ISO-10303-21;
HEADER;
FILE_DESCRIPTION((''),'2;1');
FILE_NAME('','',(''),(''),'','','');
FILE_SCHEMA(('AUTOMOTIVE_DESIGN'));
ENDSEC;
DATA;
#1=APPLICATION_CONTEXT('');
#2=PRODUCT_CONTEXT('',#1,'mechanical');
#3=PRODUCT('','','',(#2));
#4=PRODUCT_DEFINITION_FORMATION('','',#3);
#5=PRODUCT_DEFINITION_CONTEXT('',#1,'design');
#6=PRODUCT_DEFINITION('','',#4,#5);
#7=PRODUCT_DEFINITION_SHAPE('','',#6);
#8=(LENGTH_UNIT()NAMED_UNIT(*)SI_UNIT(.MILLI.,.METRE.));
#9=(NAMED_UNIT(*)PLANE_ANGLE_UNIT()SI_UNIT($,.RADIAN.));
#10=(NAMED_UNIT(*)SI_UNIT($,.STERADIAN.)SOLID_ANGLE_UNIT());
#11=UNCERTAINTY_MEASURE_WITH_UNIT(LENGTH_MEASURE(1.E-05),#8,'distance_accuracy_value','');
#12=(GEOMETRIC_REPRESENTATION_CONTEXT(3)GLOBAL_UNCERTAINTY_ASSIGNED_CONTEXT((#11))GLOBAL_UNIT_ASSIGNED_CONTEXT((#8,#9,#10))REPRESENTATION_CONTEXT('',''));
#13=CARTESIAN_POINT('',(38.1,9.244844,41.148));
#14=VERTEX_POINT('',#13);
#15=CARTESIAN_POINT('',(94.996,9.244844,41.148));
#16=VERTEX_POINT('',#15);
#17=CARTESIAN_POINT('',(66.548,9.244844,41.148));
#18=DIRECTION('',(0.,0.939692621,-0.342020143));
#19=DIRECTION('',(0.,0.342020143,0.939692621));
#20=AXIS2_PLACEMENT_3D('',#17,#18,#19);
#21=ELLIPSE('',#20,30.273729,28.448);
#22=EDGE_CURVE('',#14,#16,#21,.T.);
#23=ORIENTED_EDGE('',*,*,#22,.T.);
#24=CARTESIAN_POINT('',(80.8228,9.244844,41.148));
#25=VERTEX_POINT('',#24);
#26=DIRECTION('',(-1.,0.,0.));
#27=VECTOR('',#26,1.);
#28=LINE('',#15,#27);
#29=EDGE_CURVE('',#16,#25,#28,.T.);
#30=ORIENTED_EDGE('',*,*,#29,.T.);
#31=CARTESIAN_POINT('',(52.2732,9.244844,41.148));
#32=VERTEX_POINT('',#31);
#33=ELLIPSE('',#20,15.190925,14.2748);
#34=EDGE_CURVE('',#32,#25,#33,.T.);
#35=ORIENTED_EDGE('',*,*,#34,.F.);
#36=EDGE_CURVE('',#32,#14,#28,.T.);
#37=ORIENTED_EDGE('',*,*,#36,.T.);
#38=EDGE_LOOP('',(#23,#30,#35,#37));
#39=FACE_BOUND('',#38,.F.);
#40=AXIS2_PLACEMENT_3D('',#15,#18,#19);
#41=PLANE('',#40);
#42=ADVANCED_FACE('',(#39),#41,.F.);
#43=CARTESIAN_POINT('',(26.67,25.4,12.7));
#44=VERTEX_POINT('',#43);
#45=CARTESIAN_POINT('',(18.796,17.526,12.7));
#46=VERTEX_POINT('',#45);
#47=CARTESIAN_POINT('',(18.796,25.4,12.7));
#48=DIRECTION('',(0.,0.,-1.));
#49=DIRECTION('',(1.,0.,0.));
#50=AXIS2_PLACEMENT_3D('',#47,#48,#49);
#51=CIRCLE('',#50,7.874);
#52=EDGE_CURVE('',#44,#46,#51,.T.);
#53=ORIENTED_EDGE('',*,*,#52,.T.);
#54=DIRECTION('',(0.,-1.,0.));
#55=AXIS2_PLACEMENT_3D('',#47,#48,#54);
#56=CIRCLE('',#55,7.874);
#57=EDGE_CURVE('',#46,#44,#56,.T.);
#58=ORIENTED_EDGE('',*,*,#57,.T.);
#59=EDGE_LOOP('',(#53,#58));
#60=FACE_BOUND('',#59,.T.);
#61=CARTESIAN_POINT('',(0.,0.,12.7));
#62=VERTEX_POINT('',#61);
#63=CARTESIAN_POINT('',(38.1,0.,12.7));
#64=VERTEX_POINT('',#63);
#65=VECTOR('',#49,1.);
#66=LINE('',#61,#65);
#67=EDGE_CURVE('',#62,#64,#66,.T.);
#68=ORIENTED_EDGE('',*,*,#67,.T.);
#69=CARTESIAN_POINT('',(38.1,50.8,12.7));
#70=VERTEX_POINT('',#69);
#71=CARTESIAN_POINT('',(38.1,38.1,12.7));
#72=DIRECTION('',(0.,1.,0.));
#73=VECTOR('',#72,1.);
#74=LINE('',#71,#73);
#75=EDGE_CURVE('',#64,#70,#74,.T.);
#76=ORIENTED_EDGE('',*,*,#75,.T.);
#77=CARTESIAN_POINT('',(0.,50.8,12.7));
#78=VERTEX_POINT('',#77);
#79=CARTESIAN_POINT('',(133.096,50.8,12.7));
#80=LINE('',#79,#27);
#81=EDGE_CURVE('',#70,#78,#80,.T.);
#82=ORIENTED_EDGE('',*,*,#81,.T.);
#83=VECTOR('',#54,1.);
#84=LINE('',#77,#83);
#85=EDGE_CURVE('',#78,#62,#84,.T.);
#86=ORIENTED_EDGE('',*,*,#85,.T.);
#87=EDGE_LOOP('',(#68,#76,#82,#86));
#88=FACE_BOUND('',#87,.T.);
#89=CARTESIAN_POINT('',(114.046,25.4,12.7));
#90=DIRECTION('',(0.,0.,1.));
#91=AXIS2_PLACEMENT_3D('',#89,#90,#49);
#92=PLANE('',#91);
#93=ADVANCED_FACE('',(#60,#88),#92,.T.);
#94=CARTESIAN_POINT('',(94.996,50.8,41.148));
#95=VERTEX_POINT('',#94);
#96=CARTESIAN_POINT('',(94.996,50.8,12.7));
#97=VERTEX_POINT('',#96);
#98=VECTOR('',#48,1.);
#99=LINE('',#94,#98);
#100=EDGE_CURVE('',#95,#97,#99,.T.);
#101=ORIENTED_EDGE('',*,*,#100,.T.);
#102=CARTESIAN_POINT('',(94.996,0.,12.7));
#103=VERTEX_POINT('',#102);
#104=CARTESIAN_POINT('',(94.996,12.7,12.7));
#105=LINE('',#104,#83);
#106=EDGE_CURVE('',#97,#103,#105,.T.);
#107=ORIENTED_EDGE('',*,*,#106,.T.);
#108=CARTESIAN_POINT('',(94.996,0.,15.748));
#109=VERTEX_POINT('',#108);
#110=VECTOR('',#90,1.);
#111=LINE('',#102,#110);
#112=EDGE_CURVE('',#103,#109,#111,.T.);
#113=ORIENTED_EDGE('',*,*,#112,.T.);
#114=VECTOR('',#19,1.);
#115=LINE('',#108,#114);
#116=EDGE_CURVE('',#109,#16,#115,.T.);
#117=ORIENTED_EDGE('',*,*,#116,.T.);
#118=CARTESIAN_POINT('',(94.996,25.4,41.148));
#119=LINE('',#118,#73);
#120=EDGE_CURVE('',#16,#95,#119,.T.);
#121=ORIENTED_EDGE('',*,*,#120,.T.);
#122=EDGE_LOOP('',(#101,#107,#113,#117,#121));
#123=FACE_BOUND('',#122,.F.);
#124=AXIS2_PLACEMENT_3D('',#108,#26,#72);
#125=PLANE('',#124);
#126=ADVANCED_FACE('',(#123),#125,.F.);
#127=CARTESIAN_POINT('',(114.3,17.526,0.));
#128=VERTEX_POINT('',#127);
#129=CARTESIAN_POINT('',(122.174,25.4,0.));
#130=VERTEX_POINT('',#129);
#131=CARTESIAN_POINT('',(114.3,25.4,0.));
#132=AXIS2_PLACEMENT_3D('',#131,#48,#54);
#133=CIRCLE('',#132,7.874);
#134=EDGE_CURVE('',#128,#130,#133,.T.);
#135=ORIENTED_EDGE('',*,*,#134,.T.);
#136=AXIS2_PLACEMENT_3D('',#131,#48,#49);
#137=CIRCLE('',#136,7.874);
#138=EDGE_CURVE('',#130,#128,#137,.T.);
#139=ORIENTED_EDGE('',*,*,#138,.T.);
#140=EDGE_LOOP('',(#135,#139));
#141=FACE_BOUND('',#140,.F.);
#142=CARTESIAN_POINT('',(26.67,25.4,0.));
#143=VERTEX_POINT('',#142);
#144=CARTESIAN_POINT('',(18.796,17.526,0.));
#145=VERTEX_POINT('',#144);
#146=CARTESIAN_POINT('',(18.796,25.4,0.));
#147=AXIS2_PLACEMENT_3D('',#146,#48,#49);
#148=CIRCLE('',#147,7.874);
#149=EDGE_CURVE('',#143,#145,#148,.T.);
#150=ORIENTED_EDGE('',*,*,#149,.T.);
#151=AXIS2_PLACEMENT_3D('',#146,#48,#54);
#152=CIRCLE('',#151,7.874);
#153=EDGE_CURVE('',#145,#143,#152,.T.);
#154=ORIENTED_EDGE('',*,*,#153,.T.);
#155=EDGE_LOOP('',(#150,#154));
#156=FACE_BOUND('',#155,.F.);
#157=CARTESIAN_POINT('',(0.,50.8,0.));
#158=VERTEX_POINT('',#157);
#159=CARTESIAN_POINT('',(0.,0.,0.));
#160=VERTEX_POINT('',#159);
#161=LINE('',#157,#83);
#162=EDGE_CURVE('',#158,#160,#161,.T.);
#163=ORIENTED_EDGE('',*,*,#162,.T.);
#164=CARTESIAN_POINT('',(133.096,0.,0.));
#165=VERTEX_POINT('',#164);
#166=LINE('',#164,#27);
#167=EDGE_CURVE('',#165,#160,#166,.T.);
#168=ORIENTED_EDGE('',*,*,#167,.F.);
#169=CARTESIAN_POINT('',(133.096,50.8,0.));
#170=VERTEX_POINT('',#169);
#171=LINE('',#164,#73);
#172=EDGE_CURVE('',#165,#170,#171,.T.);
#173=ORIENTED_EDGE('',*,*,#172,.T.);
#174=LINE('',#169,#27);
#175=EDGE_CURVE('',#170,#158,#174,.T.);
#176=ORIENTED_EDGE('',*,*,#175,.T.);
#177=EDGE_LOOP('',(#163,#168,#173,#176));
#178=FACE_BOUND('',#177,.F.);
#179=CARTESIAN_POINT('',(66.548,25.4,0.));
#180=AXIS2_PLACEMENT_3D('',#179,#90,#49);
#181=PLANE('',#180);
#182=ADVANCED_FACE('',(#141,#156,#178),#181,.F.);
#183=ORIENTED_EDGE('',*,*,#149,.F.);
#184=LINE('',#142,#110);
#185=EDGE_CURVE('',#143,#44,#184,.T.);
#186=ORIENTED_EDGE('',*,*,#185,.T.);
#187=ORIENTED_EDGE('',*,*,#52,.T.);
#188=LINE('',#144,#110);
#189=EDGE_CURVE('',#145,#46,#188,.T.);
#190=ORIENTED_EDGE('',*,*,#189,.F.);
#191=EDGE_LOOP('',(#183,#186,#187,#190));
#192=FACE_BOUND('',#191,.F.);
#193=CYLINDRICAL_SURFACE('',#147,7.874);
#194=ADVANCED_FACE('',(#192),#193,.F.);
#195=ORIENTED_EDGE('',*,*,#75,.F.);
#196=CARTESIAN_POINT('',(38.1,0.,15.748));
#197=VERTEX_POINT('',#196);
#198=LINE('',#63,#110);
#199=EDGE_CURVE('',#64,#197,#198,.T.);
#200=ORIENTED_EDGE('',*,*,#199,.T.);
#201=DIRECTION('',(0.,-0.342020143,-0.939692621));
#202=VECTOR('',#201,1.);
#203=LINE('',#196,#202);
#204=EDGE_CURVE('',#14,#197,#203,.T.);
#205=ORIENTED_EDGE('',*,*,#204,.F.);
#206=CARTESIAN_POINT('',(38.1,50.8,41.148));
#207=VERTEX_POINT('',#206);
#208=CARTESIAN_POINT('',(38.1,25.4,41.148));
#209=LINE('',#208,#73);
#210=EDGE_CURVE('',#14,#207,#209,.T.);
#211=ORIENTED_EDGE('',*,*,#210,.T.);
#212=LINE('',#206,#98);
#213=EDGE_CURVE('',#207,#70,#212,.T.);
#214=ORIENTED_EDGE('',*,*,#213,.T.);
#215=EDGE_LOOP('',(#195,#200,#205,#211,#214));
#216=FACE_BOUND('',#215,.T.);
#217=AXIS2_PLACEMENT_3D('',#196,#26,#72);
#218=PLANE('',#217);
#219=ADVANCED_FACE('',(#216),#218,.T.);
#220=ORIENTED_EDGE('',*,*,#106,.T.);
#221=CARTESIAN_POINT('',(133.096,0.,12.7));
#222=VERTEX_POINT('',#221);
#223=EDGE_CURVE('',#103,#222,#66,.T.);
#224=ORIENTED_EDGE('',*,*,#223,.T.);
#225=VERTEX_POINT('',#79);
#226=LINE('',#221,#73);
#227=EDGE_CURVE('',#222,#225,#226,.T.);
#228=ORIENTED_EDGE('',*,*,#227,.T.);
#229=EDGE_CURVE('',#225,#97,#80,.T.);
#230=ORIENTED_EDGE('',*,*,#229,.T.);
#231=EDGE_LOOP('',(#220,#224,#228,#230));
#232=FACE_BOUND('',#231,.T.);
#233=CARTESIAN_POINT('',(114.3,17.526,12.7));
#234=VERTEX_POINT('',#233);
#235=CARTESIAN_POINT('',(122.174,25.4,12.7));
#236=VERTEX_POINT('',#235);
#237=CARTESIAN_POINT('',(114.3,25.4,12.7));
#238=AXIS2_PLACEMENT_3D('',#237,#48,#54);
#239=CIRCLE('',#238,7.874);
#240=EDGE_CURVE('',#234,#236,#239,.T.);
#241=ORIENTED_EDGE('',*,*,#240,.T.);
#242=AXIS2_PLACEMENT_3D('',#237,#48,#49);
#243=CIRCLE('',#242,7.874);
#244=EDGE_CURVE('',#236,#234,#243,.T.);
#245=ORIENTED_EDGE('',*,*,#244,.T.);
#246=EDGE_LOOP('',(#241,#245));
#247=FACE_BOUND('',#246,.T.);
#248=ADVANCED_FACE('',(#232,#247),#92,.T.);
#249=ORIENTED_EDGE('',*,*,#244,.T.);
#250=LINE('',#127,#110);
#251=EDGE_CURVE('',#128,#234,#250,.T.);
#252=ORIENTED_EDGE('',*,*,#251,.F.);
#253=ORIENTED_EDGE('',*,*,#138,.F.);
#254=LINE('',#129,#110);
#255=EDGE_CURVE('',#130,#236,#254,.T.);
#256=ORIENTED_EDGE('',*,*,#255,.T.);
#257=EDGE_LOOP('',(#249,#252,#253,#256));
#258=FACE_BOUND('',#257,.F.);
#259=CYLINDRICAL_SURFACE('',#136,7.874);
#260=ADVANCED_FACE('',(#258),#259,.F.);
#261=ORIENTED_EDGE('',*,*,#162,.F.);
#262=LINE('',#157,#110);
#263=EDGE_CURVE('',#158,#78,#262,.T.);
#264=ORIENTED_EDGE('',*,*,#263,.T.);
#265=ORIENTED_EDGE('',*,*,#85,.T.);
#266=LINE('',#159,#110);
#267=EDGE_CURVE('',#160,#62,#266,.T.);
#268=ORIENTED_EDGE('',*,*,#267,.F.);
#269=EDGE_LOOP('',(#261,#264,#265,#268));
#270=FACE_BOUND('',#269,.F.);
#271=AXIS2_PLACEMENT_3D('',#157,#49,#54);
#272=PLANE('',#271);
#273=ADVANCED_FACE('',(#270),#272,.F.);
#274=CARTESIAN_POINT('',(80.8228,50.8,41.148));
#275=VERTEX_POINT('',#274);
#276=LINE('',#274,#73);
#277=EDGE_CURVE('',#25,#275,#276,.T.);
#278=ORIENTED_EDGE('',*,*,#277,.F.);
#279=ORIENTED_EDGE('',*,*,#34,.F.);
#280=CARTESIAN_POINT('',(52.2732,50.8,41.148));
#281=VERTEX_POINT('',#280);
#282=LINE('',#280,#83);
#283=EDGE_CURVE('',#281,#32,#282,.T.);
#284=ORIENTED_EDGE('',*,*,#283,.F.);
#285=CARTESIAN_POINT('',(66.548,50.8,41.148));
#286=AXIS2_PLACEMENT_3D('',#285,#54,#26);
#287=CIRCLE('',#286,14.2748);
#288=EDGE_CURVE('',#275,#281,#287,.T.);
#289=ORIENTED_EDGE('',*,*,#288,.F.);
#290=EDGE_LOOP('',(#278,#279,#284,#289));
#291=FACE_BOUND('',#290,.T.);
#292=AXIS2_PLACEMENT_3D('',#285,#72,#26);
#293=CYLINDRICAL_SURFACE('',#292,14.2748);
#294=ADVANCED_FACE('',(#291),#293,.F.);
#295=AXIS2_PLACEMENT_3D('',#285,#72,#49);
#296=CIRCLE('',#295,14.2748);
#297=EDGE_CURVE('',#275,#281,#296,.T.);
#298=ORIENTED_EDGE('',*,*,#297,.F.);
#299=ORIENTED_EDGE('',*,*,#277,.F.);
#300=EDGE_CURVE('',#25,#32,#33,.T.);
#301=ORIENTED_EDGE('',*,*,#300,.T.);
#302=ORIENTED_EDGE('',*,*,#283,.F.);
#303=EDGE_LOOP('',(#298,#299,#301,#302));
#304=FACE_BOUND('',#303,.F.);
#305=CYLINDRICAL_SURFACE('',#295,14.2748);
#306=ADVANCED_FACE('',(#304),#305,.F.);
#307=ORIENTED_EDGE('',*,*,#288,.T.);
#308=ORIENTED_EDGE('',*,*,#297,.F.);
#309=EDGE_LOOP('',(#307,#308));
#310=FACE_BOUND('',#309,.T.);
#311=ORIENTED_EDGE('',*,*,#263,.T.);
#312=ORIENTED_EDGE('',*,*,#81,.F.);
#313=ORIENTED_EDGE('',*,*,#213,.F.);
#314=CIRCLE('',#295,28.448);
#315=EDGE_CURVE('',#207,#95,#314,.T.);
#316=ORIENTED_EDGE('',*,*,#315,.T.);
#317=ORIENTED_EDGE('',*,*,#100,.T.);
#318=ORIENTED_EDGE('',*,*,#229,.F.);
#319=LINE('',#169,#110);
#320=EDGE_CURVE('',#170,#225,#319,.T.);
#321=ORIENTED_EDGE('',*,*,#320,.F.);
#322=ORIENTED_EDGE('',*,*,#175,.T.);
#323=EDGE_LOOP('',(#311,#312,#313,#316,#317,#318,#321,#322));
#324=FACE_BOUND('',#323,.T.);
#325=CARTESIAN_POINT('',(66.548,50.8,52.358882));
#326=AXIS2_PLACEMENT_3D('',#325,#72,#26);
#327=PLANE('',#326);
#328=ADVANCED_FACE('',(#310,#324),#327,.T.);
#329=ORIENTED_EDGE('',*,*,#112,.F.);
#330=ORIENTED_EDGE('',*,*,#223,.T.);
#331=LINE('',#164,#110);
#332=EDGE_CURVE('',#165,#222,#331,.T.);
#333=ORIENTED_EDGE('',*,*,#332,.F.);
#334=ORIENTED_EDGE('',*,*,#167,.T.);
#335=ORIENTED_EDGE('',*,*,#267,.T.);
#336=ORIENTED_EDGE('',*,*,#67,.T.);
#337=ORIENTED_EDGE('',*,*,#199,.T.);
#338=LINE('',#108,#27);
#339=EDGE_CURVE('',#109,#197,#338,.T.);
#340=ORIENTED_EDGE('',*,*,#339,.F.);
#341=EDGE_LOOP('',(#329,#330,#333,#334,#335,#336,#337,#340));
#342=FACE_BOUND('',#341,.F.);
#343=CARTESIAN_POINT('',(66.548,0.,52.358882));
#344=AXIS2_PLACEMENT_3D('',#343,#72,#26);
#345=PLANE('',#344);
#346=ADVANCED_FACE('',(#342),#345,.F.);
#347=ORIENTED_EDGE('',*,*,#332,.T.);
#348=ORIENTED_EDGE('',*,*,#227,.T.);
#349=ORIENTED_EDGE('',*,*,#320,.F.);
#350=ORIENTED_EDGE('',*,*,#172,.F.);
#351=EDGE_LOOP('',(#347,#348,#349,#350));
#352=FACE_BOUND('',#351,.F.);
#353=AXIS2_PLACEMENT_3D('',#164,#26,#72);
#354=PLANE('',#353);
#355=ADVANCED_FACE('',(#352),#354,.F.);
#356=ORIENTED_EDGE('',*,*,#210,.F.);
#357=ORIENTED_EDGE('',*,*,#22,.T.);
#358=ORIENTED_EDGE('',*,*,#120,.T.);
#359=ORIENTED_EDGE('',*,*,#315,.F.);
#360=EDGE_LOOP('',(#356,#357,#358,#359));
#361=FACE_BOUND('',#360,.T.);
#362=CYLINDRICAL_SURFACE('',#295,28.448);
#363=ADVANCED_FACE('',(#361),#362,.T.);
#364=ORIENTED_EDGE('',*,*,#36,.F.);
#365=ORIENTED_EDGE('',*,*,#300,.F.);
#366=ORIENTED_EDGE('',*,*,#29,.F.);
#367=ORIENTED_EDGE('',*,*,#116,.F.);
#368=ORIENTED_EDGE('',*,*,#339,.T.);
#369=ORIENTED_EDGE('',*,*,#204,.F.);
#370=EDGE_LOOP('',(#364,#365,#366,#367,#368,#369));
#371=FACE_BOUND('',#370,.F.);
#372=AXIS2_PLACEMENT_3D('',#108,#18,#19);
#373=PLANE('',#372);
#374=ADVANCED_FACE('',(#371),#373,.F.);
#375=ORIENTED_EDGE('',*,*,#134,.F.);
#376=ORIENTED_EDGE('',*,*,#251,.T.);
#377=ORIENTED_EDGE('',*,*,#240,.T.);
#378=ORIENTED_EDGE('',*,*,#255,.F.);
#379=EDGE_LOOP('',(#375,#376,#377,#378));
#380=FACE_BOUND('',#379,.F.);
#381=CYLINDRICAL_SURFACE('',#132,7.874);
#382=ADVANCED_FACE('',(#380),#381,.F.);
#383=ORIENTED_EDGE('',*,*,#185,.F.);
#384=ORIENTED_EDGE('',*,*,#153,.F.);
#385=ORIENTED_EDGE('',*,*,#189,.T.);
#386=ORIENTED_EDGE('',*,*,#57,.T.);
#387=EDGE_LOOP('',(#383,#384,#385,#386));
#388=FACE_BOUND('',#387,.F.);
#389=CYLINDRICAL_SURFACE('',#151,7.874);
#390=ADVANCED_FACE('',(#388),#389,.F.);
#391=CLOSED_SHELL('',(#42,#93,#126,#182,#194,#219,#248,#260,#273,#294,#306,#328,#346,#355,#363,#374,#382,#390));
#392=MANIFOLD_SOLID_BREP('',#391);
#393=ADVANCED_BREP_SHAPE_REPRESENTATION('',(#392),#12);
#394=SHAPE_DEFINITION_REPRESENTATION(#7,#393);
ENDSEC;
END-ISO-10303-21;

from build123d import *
from build123d import SkipClean  # not in build123d's __all__

# Parameters (mm, degrees)
F1_DEPTH  = 12.7
F2_DEPTH  = 15.748
F3_W      = 56.896
F3_H      = 50.8
F4_DEPTH  = 25.4
F5_DEPTH  = 47.244
F7_DEPTH  = 50.8
F8_DEPTH  = 50.8
F10_DEPTH = 101.6


# Not quite as in the source:
# - a feature names something its author has since deleted; it is built from what else it names


with BuildPart() as f1:
    # F0 (on Top) → F1 (new body)
    with BuildSketch(Plane.XY):
        Polygon((133.096, 50.8), (94.996, 50.8), (94.996, 0), (114.3, 0), (133.096, 0), align=None)
        with BuildLine():
            ThreePointArc((122.174, 25.4), (119.8677587951, 19.8322412049), (114.3, 17.526))
            ThreePointArc((114.3, 17.526), (108.7322412049, 30.9677587951), (122.174, 25.4))
        make_face(mode=Mode.SUBTRACT)
        Polygon((0, 50.8), (0, 0), (18.796, 0), (38.1, 0), (38.1, 50.8), align=None)
        with BuildLine():
            ThreePointArc((26.67, 25.4), (24.3637587951, 19.8322412049), (18.796, 17.526))
            ThreePointArc((18.796, 17.526), (13.2282412049, 30.9677587951), (26.67, 25.4))
        make_face(mode=Mode.SUBTRACT)
        Polygon((94.996, 50.8), (38.1, 50.8), (38.1, 0), (66.548, 0), (94.996, 0), align=None)
    extrude(amount=F1_DEPTH)

    # F0 (on Top) → F2 (join)
    with BuildSketch(Plane.XY):
        Polygon((94.996, 50.8), (38.1, 50.8), (38.1, 0), (66.548, 0), (94.996, 0), align=None)
    extrude(amount=F2_DEPTH)

    # F3 (on face) → F4 (join)
    with BuildSketch(Plane.XY.offset(15.748)):
        with Locations((66.548, 25.4)):
            Rectangle(F3_W, F3_H)
    extrude(amount=F4_DEPTH)

    # F0 (on Top) → F5 (cut)
    with BuildSketch(Plane.XY):
        with BuildLine():
            ThreePointArc((26.67, 25.4), (13.2282412049, 30.9677587951), (18.796, 17.526))
            ThreePointArc((18.796, 17.526), (24.3637587951, 19.8322412049), (26.67, 25.4))
        make_face()
        with BuildLine():
            ThreePointArc((122.174, 25.4), (108.7322412049, 30.9677587951), (114.3, 17.526))
            ThreePointArc((114.3, 17.526), (119.8677587951, 19.8322412049), (122.174, 25.4))
        make_face()
    extrude(amount=-F5_DEPTH, mode=Mode.SUBTRACT)

    # F6 (on face) → F7 (join)
    with BuildSketch(Plane(origin=(0, 50.8, 0), x_dir=(-1, 0, 0), z_dir=(0, 1, 0))):
        with BuildLine():
            Line((-52.2732, 41.148), (-38.1, 41.148))
            ThreePointArc((-38.1, 41.148), (-66.548, 69.596), (-94.996, 41.148))
            Line((-94.996, 41.148), (-80.8228, 41.148))
            ThreePointArc((-80.8228, 41.148), (-66.548, 55.4228), (-52.2732, 41.148))
        make_face()
        with BuildLine():
            ThreePointArc((-94.996, 41.148), (-66.548, 12.7), (-38.1, 41.148))
            Line((-38.1, 41.148), (-52.2732, 41.148))
            ThreePointArc((-52.2732, 41.148), (-66.548, 26.8732), (-80.8228, 41.148))
            Line((-80.8228, 41.148), (-94.996, 41.148))
        make_face()
    extrude(amount=-F7_DEPTH)

    # F6 (on face) → F8 (cut)
    with BuildSketch(Plane(origin=(0, 50.8, 0), x_dir=(-1, 0, 0), z_dir=(0, 1, 0))):
        with BuildLine():
            ThreePointArc((-80.8228, 41.148), (-66.548, 26.8732), (-52.2732, 41.148))
            Line((-52.2732, 41.148), (-80.8228, 41.148))
        make_face()
    with SkipClean():  # cleaning this boolean's faces spoils the solid; the shape is the same uncleaned
        extrude(amount=-F8_DEPTH, mode=Mode.SUBTRACT)

    # F9 (on face) → F10 (cut)
    with BuildSketch(Plane.YZ.offset(94.996)):
        Polygon((0, 68.7535953361), (0, 41.148), (9.2448439504, 41.148), (25.583601225, 86.0383666739), (0, 86.0383666739), align=None)
        Polygon((0, 41.148), (0, 15.748), (9.2448439504, 41.148), align=None)
    with SkipClean():  # cleaning this boolean's faces spoils the solid; the shape is the same uncleaned
        extrude(amount=-F10_DEPTH, mode=Mode.SUBTRACT)


solid = f1.part
